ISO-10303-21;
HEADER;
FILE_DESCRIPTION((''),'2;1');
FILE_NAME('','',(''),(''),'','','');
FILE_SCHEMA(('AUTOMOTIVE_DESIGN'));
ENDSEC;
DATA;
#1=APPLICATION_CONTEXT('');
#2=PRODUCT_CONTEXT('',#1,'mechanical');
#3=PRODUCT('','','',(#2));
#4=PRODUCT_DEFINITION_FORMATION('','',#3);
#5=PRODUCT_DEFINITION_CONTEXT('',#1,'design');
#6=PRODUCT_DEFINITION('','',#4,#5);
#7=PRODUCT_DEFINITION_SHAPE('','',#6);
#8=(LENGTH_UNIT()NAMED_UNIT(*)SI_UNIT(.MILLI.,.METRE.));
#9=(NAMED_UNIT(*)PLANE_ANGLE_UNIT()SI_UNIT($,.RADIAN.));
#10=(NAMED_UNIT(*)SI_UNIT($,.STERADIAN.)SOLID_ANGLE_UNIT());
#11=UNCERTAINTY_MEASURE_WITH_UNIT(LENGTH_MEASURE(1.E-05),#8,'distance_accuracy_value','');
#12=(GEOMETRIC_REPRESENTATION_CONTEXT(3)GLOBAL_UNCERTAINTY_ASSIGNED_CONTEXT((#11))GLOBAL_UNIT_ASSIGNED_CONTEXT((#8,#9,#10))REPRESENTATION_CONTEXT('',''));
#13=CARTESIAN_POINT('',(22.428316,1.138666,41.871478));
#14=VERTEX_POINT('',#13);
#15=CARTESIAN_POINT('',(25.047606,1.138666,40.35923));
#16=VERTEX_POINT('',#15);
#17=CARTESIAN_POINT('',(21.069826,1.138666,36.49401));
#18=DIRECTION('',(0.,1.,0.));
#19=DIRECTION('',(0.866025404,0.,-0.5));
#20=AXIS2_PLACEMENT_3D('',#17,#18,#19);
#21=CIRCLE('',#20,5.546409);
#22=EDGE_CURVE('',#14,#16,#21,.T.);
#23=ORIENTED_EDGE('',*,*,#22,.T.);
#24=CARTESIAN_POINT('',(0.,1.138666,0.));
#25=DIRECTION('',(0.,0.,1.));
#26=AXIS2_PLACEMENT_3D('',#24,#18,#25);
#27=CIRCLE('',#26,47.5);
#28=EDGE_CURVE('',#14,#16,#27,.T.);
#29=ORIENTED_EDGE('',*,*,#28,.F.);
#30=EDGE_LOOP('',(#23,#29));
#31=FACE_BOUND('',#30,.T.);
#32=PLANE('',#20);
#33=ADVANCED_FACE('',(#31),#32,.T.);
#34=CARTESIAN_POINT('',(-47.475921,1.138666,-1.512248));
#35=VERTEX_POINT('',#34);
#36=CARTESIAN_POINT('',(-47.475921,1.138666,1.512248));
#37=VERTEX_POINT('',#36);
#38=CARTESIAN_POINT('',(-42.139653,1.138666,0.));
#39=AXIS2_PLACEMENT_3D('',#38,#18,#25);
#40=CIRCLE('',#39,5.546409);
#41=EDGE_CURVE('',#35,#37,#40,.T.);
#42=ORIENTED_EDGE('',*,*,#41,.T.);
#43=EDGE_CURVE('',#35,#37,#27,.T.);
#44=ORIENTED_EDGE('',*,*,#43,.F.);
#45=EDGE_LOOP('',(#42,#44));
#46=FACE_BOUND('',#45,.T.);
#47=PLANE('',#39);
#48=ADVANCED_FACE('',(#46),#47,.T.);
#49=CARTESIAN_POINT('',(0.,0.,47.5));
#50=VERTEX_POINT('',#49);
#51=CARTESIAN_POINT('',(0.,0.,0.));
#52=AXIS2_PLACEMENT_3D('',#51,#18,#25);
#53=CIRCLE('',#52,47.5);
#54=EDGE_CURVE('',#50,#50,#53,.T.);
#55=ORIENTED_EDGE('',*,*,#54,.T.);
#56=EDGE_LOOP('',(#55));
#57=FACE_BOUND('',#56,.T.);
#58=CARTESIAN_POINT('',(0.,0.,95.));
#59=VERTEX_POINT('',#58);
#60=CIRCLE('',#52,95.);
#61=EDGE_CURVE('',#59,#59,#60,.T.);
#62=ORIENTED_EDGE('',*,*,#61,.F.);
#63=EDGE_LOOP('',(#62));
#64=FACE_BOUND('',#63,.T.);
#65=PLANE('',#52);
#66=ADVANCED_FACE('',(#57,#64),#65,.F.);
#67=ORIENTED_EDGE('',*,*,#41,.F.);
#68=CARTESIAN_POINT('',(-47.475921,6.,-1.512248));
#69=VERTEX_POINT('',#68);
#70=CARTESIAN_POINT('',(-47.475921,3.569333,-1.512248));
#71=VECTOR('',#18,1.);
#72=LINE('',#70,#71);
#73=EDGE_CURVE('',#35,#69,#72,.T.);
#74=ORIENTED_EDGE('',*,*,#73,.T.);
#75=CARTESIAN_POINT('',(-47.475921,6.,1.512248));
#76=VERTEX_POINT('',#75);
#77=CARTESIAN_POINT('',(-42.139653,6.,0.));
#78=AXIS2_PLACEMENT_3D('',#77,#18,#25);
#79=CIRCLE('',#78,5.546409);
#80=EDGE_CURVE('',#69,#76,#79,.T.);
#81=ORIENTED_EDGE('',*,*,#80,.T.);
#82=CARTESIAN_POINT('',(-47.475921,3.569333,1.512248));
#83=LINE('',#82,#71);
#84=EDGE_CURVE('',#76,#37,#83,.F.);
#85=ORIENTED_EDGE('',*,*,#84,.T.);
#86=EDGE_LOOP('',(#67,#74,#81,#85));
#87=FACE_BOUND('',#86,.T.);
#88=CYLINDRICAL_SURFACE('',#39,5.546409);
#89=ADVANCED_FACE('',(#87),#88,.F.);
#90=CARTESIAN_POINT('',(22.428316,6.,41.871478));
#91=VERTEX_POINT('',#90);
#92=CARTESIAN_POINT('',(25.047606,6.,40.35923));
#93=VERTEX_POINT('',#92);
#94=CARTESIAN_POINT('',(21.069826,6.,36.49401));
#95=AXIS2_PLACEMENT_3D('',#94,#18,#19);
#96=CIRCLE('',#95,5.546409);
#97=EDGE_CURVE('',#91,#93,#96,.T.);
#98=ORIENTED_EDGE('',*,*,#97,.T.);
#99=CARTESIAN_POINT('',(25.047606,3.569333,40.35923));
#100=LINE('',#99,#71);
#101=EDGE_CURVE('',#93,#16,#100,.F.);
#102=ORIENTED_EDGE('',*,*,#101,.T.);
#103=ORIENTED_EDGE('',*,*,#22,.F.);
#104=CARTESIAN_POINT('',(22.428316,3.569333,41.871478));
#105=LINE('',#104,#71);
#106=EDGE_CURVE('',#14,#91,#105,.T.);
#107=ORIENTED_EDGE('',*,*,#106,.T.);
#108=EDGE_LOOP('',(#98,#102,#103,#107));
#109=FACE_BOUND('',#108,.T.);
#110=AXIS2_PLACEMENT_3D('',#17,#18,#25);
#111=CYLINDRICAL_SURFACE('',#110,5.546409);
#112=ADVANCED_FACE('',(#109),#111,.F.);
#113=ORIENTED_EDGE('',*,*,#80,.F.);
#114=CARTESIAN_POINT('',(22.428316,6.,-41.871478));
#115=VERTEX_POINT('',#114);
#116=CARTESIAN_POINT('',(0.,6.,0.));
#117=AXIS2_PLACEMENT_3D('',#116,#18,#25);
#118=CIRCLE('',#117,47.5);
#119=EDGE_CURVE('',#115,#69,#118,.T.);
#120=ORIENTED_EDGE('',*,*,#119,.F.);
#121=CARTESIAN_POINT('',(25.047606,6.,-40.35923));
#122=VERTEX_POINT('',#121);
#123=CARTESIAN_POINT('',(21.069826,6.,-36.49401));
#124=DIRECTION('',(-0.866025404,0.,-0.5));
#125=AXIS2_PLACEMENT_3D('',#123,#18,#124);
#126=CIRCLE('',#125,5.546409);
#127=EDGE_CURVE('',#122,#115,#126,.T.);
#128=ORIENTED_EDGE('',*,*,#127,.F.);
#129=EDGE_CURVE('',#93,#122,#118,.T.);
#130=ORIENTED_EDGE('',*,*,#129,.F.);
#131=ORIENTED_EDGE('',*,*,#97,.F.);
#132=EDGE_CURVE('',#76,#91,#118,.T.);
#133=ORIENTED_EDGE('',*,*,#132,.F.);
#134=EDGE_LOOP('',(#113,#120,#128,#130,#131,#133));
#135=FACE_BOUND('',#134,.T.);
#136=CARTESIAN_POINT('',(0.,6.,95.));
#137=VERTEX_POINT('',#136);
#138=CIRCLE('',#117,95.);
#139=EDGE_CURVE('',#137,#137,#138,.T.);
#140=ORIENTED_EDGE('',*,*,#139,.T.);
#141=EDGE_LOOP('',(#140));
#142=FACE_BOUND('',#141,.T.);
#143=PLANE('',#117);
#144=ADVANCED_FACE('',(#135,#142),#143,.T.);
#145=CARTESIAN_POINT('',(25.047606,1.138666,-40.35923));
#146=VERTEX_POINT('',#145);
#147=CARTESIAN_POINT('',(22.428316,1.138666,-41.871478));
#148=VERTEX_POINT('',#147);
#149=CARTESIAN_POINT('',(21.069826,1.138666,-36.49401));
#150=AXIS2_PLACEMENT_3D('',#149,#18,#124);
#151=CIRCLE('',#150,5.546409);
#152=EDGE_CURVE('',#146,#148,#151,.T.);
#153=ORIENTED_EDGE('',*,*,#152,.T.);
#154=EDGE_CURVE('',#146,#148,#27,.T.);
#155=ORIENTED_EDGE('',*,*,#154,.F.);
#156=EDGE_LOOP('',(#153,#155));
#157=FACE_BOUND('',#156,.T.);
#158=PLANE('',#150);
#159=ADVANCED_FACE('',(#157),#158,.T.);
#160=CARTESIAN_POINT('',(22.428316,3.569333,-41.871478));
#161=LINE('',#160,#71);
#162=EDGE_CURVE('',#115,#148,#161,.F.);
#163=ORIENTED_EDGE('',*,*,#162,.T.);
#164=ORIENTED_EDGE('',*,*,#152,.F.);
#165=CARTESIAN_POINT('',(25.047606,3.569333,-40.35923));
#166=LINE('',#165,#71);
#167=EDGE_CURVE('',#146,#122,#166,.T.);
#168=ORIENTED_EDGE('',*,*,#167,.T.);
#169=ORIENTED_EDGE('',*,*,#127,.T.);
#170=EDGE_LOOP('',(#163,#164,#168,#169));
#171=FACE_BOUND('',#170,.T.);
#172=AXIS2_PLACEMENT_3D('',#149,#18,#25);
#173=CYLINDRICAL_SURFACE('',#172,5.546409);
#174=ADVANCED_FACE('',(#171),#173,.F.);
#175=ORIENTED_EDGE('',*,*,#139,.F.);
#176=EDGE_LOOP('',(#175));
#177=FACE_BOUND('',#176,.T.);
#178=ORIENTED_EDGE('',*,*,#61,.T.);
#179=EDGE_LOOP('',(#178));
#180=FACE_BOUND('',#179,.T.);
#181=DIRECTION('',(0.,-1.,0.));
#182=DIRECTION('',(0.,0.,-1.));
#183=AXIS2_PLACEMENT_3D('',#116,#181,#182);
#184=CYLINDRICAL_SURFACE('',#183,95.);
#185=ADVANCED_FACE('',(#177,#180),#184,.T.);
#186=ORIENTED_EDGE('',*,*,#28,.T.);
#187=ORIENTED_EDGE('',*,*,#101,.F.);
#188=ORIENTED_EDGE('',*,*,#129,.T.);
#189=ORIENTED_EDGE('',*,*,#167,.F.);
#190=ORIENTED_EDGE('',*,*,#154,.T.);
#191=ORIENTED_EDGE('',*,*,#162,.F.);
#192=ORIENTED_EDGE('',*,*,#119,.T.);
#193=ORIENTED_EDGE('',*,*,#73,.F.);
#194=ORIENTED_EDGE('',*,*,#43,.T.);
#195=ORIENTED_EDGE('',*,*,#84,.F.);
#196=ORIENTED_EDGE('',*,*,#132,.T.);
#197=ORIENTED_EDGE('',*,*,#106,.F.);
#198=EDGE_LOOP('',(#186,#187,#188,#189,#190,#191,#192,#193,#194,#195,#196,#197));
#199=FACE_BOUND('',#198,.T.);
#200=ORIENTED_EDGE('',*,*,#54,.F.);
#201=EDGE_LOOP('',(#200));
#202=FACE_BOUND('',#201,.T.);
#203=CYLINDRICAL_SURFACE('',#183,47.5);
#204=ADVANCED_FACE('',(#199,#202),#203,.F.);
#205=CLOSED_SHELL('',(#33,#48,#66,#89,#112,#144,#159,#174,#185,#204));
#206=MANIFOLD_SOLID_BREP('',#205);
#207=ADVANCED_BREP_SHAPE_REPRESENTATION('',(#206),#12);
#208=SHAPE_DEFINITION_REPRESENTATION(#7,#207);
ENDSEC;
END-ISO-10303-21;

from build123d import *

# Parameters (mm, degrees)
SKETCH1_R           = 95
BOSS_EXTRUDE1_DEPTH = 6
SKETCH2_R           = 47.5
CUT_EXTRUDE1_DEPTH  = 135.484199815
SKETCH3_R           = 5.546409106
CUT_EXTRUDE2_DEPTH  = 4.861333749
CIRPATTERN1_COUNT   = 3


with BuildPart() as part:
    # Sketch1 → Boss-Extrude1 (new body)
    with BuildSketch(Plane(origin=(0, 0, 0), x_dir=(1, 0, 0), z_dir=(0, 1, 0))):
        Circle(SKETCH1_R)
    extrude(amount=BOSS_EXTRUDE1_DEPTH)

    # Sketch2 → Cut-Extrude1 (cut, through all)
    with BuildSketch(Plane(origin=(0, 0, 0), x_dir=(1, 0, 0), z_dir=(0, 1, 0))):
        Circle(SKETCH2_R)
    extrude(amount=CUT_EXTRUDE1_DEPTH, mode=Mode.SUBTRACT)

    # Sketch3 → Cut-Extrude2 (cut)
    with BuildSketch(Plane(origin=(0, 6, 0), x_dir=(1, 0, 0), z_dir=(0, 1, 0))):
        with Locations((-42.139652955, 0)):
            Circle(SKETCH3_R)
    cut_extrude2 = extrude(amount=-CUT_EXTRUDE2_DEPTH, mode=Mode.SUBTRACT)

    # CirPattern1: Cut-Extrude2 ×3 about axis
    cirpattern1_axis = Axis((0, 0, 0), (0, 1, 0))
    for i in range(1, CIRPATTERN1_COUNT):
        add(cut_extrude2.rotate(cirpattern1_axis, i * 360 / CIRPATTERN1_COUNT), mode=Mode.SUBTRACT)


solid = part.part
